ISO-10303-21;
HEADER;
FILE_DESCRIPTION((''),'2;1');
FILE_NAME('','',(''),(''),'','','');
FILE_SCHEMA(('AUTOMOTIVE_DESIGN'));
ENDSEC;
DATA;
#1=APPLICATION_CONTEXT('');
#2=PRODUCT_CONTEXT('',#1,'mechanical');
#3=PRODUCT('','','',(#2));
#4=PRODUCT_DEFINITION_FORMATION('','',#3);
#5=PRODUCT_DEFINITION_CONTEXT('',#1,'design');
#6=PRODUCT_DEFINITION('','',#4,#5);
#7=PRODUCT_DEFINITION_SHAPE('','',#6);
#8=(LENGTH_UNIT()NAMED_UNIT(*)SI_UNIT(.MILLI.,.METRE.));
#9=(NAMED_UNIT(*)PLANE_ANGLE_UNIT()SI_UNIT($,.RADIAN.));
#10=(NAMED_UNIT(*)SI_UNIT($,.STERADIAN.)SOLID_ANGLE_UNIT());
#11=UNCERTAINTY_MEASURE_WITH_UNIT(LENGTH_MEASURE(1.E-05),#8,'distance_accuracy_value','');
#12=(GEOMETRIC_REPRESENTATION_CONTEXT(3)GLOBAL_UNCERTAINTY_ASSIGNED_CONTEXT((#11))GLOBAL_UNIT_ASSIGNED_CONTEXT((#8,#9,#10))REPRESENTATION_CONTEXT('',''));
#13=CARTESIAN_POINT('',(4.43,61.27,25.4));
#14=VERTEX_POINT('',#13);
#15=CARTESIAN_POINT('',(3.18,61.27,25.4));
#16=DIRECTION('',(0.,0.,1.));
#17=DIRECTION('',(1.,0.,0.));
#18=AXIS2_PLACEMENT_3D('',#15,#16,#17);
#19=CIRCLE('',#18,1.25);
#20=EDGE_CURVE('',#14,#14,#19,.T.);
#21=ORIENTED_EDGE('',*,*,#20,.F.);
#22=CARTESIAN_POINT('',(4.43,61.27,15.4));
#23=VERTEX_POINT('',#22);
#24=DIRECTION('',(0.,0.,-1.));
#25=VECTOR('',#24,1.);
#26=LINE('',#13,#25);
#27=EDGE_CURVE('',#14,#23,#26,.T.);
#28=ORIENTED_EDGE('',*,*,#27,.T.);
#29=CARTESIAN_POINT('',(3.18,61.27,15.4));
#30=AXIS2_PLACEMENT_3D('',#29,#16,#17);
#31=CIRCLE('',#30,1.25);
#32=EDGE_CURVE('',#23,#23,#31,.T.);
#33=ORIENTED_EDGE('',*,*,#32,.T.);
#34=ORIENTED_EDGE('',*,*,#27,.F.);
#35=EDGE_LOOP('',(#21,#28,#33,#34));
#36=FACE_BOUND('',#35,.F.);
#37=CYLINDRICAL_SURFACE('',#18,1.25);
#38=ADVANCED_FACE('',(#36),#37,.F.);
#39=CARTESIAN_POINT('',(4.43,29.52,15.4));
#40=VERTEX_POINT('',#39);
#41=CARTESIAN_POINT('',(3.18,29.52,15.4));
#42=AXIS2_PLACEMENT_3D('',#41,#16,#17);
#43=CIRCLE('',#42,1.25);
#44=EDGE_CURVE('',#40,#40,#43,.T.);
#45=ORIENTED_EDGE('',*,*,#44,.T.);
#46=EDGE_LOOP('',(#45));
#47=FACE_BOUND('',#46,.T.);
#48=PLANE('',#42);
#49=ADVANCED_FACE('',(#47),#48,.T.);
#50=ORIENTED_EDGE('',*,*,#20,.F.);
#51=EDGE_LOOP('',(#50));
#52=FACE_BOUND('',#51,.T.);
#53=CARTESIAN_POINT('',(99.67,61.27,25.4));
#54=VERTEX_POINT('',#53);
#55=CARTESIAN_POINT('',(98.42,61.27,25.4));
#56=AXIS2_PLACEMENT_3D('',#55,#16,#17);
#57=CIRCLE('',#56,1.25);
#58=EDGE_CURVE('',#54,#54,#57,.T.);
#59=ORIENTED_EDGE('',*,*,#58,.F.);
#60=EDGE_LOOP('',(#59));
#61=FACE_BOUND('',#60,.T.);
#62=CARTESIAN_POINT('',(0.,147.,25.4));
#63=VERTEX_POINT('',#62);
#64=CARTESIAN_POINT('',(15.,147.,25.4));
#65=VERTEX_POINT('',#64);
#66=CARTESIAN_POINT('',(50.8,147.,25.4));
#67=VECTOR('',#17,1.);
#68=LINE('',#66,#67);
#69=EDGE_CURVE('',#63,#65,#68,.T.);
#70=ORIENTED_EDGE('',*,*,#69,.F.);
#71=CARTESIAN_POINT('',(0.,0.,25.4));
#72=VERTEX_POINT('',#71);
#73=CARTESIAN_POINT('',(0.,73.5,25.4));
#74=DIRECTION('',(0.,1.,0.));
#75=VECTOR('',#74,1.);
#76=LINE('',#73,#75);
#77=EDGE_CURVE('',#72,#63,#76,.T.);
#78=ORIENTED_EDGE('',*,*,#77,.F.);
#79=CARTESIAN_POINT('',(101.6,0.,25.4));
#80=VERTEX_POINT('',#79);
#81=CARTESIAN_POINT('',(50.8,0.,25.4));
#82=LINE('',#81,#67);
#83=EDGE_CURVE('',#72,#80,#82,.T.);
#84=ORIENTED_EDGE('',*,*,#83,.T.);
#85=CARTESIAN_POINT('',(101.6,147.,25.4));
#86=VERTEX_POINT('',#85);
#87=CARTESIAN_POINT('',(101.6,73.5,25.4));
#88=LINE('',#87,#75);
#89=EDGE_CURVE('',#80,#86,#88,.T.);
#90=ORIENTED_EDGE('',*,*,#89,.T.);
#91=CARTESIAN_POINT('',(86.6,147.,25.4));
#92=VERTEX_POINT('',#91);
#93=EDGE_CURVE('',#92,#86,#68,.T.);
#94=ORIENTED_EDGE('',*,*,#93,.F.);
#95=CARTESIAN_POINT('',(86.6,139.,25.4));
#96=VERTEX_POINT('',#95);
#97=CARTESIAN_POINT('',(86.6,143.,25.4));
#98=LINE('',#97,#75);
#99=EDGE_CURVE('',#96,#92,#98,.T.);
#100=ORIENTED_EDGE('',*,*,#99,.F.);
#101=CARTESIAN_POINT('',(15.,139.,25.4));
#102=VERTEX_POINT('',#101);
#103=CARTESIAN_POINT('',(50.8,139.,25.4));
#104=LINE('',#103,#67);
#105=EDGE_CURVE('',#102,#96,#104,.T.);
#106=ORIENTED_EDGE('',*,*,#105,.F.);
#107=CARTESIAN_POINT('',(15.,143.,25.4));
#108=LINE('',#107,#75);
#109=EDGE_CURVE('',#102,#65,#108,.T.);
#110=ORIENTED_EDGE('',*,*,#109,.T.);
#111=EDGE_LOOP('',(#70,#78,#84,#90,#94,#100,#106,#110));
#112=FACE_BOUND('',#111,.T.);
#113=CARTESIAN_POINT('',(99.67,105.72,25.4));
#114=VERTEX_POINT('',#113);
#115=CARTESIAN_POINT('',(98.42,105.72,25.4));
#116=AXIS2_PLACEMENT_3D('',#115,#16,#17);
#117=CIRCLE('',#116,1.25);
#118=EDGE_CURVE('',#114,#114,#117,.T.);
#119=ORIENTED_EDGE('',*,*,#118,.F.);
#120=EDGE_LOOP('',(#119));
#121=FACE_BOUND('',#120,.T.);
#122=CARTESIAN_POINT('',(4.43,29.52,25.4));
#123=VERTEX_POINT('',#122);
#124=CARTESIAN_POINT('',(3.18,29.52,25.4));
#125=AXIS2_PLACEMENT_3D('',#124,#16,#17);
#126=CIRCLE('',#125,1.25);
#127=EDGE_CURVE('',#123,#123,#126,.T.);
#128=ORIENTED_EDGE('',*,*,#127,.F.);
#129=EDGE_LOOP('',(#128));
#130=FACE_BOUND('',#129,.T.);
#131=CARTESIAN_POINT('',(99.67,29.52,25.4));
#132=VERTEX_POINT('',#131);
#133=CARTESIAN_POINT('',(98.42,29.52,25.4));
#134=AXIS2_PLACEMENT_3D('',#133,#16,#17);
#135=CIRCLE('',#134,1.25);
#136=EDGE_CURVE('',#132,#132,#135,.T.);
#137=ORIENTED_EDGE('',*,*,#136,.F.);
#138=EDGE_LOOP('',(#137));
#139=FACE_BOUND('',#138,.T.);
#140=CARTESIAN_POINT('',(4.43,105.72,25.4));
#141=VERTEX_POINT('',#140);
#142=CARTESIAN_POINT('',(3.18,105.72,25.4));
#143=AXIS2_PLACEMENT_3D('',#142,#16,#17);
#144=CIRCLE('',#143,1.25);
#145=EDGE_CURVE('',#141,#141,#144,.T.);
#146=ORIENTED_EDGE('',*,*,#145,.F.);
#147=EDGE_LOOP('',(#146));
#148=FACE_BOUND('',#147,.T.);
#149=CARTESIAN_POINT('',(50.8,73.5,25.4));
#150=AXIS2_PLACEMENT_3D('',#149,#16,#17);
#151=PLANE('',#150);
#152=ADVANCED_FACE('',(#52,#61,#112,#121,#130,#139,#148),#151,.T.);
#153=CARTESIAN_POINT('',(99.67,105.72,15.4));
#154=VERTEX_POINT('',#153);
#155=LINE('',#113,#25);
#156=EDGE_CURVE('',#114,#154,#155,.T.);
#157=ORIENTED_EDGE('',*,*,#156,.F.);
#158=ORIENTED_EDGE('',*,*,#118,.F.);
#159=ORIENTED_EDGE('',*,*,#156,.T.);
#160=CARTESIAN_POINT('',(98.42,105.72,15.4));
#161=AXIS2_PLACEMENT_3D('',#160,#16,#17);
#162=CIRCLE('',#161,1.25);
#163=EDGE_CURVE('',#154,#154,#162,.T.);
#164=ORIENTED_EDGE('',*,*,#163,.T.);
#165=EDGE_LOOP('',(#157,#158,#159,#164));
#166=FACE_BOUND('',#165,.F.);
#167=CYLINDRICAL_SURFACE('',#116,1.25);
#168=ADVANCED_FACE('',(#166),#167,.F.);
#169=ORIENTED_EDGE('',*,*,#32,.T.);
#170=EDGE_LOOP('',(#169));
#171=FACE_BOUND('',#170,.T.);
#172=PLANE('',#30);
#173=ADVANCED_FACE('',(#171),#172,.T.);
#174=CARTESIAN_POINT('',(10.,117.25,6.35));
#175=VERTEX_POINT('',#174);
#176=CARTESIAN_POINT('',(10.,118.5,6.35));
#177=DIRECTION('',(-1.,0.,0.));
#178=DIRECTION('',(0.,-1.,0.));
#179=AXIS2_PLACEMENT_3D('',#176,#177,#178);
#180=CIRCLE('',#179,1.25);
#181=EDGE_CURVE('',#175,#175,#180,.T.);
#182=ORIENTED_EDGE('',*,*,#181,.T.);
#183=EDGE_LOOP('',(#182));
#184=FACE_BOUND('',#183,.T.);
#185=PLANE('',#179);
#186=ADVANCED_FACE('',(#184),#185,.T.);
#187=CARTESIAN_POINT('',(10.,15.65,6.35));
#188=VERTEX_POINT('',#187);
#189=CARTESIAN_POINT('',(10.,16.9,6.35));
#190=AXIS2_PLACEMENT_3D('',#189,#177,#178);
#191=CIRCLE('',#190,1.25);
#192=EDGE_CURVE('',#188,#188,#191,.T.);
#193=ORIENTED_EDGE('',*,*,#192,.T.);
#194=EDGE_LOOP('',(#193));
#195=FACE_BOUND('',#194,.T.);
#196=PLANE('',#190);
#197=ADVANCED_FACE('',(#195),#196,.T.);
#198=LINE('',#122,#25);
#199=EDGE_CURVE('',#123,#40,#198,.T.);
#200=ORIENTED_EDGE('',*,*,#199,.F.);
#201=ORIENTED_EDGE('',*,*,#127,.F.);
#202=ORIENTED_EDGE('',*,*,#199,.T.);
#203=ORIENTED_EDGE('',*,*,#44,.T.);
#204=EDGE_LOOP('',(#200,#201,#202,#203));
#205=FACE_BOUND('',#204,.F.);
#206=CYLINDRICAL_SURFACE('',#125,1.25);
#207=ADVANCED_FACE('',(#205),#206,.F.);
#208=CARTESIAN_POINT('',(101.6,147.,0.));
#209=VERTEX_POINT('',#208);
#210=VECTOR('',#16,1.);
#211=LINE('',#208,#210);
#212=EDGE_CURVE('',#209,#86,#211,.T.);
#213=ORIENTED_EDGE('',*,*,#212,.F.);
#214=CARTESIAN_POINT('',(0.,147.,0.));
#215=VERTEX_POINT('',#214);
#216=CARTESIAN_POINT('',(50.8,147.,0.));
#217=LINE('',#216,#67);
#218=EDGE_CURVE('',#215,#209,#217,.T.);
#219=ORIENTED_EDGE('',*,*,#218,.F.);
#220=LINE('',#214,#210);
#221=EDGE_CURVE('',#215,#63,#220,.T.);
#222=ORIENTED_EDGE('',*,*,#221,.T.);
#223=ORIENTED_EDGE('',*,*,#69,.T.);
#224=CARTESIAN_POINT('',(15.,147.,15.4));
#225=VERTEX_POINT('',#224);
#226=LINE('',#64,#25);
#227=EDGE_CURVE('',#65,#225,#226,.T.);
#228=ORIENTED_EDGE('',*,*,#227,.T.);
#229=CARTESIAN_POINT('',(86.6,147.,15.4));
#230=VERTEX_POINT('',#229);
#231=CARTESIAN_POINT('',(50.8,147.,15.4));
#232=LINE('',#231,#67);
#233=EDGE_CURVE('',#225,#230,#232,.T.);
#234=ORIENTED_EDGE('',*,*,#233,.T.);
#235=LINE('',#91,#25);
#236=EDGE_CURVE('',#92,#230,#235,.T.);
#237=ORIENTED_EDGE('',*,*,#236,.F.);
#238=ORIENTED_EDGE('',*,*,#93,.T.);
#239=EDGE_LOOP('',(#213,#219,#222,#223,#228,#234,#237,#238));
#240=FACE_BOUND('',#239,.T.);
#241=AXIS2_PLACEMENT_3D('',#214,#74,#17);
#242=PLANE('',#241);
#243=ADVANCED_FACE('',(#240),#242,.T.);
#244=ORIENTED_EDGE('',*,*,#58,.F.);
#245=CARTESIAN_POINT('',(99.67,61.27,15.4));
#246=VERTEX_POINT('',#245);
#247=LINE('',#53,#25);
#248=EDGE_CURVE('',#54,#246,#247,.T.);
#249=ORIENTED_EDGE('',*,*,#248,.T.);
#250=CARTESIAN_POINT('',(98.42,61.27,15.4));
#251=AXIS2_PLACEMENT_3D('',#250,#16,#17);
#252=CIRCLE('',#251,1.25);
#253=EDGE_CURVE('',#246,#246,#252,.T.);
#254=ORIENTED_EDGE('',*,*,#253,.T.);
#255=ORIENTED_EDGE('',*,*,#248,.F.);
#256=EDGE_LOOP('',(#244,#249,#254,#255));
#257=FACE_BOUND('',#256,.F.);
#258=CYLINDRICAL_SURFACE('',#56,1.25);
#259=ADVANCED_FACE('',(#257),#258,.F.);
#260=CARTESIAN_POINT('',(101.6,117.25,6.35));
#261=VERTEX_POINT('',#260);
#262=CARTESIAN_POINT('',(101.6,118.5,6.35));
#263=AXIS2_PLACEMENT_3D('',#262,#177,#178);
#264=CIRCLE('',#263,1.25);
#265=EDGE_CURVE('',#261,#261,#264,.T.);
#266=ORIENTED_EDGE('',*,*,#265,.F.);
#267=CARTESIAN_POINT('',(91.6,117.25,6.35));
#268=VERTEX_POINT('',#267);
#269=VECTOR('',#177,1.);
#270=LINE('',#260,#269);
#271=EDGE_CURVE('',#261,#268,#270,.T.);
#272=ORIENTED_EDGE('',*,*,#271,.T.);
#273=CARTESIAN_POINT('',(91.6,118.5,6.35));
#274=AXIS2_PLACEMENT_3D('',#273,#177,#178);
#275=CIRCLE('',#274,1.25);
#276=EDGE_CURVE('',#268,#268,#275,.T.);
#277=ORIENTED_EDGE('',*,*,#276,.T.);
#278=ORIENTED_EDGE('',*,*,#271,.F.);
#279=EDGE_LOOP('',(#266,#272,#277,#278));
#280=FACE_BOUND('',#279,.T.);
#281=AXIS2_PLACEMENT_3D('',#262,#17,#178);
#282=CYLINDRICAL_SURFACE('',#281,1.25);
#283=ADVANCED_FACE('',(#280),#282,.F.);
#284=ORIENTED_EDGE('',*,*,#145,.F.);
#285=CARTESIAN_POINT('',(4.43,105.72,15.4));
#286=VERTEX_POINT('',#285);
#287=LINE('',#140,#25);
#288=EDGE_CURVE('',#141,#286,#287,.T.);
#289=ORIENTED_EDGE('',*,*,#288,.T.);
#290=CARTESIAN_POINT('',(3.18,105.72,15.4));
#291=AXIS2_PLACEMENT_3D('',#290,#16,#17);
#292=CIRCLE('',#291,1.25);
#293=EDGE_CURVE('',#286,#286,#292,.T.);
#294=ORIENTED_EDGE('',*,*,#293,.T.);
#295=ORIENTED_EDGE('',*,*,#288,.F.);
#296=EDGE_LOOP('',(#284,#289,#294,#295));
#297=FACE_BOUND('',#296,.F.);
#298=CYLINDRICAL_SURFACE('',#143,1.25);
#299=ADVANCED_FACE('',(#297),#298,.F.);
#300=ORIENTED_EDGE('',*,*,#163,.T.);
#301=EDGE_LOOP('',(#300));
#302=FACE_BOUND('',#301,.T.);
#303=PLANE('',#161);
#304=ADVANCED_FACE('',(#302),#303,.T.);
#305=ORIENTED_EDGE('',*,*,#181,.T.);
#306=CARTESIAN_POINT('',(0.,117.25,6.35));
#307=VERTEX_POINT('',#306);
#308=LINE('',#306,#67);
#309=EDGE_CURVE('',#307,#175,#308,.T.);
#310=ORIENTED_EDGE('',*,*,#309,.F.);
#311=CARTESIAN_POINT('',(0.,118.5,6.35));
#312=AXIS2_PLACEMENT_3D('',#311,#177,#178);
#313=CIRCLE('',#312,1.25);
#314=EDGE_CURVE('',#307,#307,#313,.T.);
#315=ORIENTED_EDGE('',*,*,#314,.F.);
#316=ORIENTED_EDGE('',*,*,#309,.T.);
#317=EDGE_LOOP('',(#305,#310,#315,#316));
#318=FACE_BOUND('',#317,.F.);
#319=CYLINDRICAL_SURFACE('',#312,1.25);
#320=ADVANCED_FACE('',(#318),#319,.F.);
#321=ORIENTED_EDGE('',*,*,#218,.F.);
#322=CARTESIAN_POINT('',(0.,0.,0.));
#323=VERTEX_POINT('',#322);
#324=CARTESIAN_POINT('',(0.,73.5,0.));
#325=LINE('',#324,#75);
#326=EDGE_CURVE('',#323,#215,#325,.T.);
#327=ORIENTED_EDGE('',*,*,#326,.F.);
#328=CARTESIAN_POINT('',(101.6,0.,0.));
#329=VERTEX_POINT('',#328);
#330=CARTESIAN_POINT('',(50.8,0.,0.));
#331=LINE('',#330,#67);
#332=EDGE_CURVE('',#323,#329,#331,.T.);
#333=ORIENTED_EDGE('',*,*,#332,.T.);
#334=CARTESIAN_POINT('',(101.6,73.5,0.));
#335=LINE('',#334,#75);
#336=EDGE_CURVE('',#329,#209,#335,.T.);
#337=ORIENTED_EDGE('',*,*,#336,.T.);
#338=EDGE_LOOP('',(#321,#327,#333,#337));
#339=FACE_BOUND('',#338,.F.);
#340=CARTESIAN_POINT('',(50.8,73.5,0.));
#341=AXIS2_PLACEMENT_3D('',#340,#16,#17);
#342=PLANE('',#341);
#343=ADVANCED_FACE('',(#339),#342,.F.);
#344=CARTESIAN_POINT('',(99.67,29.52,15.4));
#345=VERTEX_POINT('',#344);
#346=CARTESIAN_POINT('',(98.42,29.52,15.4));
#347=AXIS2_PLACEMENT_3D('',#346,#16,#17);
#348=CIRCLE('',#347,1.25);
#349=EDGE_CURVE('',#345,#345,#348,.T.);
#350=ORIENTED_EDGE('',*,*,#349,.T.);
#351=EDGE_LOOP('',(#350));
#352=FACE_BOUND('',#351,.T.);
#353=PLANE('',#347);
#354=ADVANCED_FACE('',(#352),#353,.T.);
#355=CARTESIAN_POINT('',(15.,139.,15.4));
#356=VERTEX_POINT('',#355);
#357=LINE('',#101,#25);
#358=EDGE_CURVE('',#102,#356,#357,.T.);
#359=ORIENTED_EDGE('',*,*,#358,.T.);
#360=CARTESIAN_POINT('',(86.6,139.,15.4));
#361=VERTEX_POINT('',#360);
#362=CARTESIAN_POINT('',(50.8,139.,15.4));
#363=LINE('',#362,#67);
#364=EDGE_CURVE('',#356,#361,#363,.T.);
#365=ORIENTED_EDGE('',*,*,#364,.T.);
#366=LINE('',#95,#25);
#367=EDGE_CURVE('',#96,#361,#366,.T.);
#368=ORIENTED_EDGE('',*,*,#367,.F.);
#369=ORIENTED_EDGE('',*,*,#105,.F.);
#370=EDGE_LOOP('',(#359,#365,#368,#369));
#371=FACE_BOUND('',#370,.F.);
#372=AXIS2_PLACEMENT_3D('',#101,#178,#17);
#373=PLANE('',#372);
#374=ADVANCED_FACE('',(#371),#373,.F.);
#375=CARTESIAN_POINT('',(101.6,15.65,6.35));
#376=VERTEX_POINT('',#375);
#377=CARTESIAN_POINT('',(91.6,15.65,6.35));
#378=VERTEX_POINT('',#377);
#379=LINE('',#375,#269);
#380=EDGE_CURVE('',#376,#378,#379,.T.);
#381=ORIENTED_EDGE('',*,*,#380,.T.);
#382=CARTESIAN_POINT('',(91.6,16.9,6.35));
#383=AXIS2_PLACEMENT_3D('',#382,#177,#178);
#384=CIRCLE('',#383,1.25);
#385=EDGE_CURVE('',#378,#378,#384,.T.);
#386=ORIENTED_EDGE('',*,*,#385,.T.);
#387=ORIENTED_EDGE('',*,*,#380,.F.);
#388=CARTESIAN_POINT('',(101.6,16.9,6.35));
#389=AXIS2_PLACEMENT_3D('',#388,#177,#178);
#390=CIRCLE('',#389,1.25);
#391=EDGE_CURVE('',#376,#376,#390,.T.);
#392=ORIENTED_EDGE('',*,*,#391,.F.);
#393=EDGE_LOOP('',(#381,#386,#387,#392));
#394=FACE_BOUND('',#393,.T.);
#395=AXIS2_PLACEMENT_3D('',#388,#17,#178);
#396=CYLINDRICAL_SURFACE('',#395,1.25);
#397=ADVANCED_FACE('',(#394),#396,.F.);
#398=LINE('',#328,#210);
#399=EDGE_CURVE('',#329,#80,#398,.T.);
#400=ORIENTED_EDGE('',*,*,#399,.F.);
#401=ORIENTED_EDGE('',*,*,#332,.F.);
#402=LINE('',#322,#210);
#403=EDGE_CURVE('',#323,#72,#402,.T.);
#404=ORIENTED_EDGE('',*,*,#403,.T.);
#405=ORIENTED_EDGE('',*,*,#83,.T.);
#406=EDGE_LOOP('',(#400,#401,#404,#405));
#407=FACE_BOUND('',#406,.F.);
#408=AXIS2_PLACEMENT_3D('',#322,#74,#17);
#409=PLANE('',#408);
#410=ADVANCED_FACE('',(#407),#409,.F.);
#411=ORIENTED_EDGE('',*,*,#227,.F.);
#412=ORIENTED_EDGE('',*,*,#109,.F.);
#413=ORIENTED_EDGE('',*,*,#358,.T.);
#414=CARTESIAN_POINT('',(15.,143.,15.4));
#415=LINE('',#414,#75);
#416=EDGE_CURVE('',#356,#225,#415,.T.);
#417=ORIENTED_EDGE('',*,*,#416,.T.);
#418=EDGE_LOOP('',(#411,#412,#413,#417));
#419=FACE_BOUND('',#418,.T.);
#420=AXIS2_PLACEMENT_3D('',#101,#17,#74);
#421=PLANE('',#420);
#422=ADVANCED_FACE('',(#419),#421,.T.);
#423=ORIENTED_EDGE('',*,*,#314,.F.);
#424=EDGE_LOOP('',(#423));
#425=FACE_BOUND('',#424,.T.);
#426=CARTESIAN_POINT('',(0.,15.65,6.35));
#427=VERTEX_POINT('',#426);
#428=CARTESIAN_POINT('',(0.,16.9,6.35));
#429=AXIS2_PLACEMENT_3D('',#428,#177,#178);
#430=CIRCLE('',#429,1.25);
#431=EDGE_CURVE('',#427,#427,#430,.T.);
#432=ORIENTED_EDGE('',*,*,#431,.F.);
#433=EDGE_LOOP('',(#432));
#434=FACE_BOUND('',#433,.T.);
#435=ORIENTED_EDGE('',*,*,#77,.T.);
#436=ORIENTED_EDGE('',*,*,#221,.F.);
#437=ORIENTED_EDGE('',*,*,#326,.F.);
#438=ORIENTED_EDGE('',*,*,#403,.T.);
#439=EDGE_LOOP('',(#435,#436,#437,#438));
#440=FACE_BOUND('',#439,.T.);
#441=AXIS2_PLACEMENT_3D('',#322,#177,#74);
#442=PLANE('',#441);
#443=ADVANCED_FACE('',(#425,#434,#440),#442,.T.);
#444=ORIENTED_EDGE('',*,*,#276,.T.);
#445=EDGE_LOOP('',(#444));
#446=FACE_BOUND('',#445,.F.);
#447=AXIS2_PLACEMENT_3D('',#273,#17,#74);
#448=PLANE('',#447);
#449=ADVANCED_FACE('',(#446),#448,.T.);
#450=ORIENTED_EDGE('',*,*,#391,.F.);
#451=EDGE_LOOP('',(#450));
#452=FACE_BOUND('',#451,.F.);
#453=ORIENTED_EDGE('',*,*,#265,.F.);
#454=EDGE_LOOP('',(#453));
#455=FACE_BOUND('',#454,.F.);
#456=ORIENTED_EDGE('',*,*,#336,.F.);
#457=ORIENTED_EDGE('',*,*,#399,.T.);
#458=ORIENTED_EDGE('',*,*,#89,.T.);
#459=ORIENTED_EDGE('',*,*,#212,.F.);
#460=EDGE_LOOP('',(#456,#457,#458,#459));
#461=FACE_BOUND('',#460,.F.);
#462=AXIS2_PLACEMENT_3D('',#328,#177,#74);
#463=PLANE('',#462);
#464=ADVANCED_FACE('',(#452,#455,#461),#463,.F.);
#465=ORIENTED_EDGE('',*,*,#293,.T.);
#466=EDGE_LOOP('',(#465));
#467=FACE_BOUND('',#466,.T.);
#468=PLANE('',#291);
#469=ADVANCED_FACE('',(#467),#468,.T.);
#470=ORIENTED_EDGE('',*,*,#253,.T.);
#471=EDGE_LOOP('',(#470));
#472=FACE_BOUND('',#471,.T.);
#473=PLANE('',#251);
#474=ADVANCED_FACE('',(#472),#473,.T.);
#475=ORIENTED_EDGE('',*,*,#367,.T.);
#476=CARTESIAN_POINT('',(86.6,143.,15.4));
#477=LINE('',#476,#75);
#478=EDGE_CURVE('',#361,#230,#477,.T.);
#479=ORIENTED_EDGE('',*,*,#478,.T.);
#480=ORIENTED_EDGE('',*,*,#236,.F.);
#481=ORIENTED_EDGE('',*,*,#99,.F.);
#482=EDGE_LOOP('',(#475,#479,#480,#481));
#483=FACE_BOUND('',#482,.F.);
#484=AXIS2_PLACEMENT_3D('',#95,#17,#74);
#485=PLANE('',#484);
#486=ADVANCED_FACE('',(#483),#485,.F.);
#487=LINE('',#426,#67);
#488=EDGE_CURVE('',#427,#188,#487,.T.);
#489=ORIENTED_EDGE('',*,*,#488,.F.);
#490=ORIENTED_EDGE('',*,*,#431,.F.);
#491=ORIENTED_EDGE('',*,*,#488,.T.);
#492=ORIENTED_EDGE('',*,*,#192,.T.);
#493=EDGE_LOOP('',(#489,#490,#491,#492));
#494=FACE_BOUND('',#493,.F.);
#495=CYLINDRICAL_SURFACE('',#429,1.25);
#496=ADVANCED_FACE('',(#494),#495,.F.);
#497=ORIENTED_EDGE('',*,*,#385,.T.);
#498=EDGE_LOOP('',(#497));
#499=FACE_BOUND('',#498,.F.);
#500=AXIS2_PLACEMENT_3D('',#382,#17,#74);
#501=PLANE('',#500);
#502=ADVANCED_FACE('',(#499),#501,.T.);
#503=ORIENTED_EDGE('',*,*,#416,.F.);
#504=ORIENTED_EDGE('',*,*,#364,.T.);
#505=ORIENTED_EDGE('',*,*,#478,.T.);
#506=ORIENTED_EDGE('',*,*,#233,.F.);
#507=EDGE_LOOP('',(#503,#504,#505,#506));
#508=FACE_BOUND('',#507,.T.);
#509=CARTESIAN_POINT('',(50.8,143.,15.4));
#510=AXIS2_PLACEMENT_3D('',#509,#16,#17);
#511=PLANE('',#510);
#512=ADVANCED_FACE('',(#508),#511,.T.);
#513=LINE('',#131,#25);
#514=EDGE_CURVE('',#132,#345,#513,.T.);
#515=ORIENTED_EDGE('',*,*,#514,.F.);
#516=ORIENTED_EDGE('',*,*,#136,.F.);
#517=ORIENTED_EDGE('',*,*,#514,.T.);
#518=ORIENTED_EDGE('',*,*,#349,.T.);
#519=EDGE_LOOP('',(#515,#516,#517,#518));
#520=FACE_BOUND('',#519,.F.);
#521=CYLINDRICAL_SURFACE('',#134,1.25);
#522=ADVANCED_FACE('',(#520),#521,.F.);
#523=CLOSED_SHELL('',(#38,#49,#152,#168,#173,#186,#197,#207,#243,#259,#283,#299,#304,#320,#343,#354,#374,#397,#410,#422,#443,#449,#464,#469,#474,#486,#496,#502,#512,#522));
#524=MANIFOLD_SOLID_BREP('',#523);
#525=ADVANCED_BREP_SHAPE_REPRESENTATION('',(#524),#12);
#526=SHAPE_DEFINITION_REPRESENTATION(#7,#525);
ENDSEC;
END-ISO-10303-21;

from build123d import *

# Parameters (mm, degrees)
F0_W     = 101.6
F0_H     = 147
F1_DEPTH = 25.4
F2_R     = 1.25
F2_W     = 71.6
F2_H     = 8
F3_DEPTH = 10
F4_R     = 1.25
F5_DEPTH = 10


# Not quite as in the source:
# - a pattern or mirror of a feature is missing from the dataset's text; its kind, count and spacing are read off the source's solid


with BuildPart() as f1:
    # F0 (on Top) → F1 (new body)
    with BuildSketch(Plane.XY):
        with Locations((50.8, 73.5)):
            Rectangle(F0_W, F0_H)
    extrude(amount=F1_DEPTH)

    # F2 (on face) → F3 (cut)
    with BuildSketch(Plane.XY.offset(25.4)):
        with Locations((3.18, 29.52)):
            Circle(F2_R)
        with Locations((3.18, 61.27)):
            Circle(F2_R)
        with Locations((3.18, 105.72)):
            Circle(F2_R)
        with Locations((98.42, 29.52)):
            Circle(F2_R)
        with Locations((98.42, 61.27)):
            Circle(F2_R)
        with Locations((98.42, 105.72)):
            Circle(F2_R)
        with Locations((50.8, 143)):
            Rectangle(F2_W, F2_H)
    extrude(amount=-F3_DEPTH, mode=Mode.SUBTRACT)

    # F4 (on face) → F5 (cut)
    with BuildSketch(Plane(origin=(0, 0, 0), x_dir=(0, -1, 0), z_dir=(-1, 0, 0))):
        with Locations((-118.5, 6.35)):
            Circle(F4_R)
        with Locations((-16.9, 6.35)):
            Circle(F4_R)
    f5 = extrude(amount=-F5_DEPTH, mode=Mode.SUBTRACT)

    # F5_copies: F5 across plane
    add(f5.mirror(Plane(origin=(50.8, 0, 0), x_dir=(0, 0, 1), z_dir=(1, 0, 0))), mode=Mode.SUBTRACT)


solid = f1.part
